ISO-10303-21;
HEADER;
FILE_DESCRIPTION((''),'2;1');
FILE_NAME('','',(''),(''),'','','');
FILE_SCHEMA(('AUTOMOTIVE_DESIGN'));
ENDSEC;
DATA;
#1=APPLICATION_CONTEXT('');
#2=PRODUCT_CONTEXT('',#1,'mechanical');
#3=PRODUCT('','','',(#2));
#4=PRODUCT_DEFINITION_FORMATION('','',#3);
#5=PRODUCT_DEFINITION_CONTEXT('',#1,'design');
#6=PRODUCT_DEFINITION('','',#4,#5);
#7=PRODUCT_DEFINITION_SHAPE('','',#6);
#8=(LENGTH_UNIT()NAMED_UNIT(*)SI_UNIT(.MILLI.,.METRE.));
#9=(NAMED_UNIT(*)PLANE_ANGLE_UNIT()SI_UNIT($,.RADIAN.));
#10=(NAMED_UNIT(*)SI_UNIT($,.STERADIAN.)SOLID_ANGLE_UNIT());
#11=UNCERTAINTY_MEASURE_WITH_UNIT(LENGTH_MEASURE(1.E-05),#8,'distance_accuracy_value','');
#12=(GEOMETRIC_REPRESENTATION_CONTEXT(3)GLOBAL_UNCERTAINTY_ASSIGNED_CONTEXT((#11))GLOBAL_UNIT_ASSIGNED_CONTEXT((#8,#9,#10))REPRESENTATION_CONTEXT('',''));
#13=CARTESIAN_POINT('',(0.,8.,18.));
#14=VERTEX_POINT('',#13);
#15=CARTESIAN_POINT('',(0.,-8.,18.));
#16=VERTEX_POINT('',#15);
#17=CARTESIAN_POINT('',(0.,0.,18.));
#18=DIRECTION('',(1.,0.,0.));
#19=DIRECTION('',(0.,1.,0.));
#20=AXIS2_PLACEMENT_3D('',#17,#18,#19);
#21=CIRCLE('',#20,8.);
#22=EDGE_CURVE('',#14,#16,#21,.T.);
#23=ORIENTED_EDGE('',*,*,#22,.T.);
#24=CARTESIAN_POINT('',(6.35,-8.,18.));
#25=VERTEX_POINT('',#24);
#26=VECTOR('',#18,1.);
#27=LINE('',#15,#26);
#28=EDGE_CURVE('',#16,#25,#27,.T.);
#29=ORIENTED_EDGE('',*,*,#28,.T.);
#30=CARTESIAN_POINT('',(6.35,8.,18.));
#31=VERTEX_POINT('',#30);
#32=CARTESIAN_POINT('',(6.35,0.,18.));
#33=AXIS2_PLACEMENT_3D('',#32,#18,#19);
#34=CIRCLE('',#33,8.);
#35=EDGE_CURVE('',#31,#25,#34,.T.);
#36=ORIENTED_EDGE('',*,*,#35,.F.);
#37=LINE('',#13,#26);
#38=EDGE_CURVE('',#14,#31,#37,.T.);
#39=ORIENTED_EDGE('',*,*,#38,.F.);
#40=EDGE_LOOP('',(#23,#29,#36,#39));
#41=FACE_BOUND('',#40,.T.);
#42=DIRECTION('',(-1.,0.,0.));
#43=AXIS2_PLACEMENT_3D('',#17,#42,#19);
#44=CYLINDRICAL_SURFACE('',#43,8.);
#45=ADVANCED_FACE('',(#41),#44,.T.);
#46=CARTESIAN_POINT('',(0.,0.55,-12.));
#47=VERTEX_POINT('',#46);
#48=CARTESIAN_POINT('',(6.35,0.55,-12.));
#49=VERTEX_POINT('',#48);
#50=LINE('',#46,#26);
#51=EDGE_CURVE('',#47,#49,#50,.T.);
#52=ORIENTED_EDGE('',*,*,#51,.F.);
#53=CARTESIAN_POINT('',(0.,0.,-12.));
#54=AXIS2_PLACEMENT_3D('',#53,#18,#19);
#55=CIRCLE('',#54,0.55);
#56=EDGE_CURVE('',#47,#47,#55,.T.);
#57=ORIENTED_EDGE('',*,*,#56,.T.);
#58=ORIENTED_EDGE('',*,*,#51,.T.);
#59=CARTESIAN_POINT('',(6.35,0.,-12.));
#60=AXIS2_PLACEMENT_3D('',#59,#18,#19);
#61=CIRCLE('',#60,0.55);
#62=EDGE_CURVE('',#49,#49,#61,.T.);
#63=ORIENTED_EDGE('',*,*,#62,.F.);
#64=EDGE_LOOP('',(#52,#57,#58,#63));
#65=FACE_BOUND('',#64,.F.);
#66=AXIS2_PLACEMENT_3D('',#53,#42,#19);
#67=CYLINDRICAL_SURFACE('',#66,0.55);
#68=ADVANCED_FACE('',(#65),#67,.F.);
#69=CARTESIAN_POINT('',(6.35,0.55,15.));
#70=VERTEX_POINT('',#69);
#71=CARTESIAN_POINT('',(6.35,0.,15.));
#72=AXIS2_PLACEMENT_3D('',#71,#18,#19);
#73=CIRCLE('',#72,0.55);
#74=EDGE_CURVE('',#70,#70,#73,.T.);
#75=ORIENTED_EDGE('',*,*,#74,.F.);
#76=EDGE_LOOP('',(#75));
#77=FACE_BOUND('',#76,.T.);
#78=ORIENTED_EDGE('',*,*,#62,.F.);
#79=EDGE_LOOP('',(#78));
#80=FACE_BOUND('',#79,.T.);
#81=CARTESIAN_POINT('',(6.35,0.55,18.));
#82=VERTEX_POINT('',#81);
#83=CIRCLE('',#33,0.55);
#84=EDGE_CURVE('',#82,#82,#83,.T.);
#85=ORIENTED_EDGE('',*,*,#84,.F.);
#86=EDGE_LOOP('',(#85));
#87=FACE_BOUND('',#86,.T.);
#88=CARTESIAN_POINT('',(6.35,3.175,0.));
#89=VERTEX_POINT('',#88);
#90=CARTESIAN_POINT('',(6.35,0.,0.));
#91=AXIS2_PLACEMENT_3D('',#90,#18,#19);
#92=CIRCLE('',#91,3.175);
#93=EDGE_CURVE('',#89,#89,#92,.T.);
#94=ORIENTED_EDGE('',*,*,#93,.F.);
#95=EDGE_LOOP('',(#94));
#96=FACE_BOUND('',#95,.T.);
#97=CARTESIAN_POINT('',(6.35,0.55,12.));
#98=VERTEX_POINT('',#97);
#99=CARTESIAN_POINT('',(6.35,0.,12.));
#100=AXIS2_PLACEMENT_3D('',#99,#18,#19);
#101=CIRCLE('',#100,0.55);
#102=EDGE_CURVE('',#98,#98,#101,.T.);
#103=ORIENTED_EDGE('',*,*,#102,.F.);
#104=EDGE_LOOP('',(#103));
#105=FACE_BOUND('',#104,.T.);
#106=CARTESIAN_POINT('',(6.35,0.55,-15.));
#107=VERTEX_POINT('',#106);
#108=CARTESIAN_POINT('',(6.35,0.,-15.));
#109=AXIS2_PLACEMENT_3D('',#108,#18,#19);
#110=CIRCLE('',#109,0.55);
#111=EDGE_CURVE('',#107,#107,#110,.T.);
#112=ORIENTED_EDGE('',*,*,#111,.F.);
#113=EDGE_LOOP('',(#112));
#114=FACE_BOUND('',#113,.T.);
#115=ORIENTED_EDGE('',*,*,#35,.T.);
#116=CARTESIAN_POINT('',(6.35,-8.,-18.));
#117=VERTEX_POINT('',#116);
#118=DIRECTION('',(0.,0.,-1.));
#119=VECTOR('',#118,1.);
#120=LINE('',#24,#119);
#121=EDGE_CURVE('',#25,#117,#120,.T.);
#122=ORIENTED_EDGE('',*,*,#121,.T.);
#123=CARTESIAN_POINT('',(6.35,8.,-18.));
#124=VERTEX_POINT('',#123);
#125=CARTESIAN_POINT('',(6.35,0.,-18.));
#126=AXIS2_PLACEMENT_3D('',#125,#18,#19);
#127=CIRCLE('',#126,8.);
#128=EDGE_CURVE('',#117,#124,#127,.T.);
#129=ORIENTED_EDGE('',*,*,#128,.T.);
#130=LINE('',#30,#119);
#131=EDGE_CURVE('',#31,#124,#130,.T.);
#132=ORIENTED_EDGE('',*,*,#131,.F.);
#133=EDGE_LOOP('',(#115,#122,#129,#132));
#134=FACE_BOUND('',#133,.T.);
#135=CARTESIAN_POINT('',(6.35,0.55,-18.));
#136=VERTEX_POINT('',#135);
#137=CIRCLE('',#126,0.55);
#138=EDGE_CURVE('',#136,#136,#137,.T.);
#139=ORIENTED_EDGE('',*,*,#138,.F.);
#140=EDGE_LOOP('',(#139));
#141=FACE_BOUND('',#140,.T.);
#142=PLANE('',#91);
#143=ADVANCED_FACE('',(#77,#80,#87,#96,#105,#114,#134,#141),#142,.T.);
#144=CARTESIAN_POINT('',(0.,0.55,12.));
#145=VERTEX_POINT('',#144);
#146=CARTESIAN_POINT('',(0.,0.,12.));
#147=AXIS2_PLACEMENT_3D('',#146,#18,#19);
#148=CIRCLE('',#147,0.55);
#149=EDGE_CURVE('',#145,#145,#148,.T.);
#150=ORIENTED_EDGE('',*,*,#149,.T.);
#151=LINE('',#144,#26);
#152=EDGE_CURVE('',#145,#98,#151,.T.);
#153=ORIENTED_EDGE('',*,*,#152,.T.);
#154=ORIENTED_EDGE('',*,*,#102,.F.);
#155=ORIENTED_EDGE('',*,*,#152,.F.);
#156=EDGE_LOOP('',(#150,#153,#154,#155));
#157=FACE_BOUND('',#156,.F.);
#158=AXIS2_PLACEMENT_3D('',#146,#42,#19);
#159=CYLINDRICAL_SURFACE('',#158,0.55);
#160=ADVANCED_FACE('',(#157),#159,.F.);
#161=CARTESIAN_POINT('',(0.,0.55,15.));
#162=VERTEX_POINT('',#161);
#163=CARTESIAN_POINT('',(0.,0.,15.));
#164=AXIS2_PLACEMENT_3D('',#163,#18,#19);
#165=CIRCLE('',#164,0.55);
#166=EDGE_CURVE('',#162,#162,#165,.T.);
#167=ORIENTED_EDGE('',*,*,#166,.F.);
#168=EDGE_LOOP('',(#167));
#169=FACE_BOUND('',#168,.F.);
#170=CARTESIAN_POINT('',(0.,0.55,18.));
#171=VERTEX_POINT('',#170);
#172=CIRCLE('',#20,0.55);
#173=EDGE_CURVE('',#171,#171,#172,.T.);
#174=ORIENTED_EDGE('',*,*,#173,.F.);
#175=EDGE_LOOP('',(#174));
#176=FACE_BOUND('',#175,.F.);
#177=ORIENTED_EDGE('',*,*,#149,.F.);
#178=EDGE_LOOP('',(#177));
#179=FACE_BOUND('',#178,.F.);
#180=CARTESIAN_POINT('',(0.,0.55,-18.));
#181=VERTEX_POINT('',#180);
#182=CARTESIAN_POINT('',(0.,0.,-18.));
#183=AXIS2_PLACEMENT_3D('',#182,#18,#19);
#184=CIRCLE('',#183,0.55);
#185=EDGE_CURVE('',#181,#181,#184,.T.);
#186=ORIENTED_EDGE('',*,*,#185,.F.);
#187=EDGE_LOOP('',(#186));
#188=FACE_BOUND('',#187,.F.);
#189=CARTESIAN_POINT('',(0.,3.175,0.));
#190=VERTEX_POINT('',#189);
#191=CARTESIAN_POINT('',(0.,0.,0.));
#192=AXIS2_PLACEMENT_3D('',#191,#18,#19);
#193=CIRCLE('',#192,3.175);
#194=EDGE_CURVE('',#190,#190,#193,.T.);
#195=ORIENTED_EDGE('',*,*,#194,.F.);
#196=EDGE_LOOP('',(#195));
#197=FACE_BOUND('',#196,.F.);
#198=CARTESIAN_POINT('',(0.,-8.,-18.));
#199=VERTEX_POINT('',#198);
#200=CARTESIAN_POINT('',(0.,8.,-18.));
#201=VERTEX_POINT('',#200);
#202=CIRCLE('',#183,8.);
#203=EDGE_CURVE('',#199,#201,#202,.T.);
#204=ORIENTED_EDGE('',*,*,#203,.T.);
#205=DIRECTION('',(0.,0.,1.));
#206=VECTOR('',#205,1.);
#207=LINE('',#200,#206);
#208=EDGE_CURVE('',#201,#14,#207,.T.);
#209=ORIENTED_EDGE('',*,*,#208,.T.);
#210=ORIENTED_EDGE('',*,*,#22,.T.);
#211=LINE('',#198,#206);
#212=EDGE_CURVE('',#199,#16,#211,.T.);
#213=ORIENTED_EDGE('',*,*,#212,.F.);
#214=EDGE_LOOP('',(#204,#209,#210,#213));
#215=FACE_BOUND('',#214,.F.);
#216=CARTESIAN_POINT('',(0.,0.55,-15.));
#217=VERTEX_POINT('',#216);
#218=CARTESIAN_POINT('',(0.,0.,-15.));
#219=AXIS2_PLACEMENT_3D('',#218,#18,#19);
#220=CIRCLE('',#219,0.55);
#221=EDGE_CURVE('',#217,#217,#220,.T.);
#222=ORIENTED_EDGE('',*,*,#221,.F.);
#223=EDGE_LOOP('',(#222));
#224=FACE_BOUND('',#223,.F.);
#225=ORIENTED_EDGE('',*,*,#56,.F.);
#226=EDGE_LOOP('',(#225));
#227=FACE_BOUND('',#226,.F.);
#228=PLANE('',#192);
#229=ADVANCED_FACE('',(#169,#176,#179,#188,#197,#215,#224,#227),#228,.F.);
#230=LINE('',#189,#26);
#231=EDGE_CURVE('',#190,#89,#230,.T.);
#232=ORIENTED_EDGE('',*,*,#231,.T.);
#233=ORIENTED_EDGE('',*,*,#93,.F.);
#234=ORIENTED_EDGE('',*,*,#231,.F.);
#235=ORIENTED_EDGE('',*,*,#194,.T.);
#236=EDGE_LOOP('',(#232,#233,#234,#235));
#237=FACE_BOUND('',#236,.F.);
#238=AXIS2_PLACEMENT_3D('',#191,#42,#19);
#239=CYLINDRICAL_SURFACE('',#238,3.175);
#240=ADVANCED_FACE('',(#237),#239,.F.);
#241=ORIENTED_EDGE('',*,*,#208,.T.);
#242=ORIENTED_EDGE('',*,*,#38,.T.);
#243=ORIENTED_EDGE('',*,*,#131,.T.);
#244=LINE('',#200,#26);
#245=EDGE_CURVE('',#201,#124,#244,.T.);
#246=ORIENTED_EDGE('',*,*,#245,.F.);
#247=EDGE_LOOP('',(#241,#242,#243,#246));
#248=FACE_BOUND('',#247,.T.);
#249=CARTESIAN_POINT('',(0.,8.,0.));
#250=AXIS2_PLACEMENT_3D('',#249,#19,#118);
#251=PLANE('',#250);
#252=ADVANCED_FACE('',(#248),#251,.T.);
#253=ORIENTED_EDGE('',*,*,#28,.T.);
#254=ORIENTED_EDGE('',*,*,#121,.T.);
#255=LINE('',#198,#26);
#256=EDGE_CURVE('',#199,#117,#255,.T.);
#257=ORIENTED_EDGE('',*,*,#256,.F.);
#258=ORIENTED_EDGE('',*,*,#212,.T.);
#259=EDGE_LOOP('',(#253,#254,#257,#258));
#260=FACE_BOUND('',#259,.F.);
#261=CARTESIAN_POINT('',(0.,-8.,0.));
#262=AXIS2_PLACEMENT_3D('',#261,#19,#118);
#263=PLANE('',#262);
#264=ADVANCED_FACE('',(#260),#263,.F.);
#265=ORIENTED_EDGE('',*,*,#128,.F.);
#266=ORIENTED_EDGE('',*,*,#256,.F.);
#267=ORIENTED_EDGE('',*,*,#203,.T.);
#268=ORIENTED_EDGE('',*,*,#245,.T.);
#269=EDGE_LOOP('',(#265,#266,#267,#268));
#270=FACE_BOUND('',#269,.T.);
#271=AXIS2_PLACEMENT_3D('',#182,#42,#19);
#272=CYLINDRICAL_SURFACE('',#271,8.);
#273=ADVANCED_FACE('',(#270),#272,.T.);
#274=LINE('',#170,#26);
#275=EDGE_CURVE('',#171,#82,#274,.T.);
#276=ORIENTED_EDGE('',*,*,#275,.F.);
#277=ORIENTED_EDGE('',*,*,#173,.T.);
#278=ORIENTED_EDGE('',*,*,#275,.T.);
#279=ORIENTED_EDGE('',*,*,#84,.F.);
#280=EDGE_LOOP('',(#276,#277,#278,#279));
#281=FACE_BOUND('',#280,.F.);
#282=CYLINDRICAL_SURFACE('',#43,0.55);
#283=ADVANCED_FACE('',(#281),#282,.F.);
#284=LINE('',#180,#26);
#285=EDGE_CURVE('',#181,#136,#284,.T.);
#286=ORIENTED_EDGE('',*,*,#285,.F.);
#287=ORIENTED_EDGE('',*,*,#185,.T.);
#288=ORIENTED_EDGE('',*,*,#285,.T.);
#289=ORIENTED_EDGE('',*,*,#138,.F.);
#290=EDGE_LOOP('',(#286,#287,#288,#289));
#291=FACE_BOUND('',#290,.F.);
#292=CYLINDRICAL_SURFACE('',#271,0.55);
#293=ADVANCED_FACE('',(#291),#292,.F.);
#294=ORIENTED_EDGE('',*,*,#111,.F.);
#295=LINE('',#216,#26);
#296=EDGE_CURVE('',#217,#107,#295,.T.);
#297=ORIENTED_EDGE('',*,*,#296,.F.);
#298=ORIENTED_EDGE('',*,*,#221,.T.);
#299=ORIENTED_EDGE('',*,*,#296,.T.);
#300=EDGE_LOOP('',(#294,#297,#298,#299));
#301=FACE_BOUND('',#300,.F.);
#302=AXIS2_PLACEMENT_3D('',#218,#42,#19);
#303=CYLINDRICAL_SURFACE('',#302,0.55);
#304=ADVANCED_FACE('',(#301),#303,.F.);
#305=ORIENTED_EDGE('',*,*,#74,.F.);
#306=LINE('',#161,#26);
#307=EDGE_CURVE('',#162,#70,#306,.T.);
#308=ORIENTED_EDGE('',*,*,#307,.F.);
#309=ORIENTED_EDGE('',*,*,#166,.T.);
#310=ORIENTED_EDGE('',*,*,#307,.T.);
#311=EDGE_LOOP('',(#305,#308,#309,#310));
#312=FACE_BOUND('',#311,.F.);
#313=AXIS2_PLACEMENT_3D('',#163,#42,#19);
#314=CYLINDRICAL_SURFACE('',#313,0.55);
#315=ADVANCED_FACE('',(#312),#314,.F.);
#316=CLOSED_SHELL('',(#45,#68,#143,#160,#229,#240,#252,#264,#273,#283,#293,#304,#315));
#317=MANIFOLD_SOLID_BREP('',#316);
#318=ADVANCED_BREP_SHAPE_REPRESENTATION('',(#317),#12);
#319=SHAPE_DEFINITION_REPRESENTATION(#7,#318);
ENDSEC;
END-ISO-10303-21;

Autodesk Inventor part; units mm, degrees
ref_plane "YZ Plane" through (0, 0, 0) normal (1, 0, 0) x (0, 1, 0)
ref_plane "XZ Plane" through (0, 0, 0) normal (0, 1, 0) x (-1, 0, 0)
ref_plane "XY Plane" through (0, 0, 0) normal (0, 0, 1) x (1, 0, 0)
sketch "Block1" plane through (0, 0, 0) normal (0, 0, 1) x (1, 0, 0)
  circle A0 centre (-34.5082, -40.3774) radius 0.55
  circle A1 centre (-31.5082, -40.3774) radius 0.55
  circle A2 centre (-28.5082, -40.3774) radius 0.55
  point P0 (-31.5082, -40.3774)
  dimension "d7" = 1.1
  dimension "d8" = 1.1
  dimension "d9" = 1.1
sketch "Sketch1" plane through (0, 0, 0) normal (1, 0, 0) x (0, 1, 0)
  circle A0 centre (0, 0) radius 3.175
  line L0 (8, 0) -> (8, -60)
  line L1 (-8, 0) -> (-8, -60)
  arc A1 (-8, -60) -> (8, -60) centre (0, -60) ccw
  circle A2 centre (0, -60) radius 3.175
  line L2 (0, -105.9654) -> (0, 47.9942) construction
  line L3 (8, 0) -> (-8, 0) construction
  line L4 (8, 0) -> (8, 18)
  line L5 (-8, 0) -> (-8, 18)
  arc A3 (8, 18) -> (-8, 18) centre (0, 18) ccw
  line L6 (-36, 0) -> (58.5, 0) construction
  line L7 (0, -45) -> (-22.5, -83.9711)
  line L8 (0, -45) -> (45, -45) construction
  line L9 (-22.5, -83.9711) -> (-22.5, -45)
  line L10 (-22.5, -45) -> (0, -45)
  line L11 (-22.5, -45) -> (-8, -30)
  circle A4 centre (0, -18) radius 8
  circle A5 centre (0, -12) radius 0.55
  circle A6 centre (0, -15) radius 0.55
  circle A7 centre (0, -18) radius 0.55
  circle A8 centre (0, 12) radius 0.55
  circle A9 centre (0, 15) radius 0.55
  circle A10 centre (0, 18) radius 0.55
  point P0 (0, 0)
  point P1 (-8, -58.8564)
  point P2 (-8, -18)
  point P3 (8, -18)
  dimension "d0" = 6.35
  dimension "d2" = 16
  dimension "d4" = 6.35
  dimension "d11" = 12
  dimension "d12" = 60
  dimension "d13" = 45
  dimension "d14" = 120
  dimension "d15" = 45
extrude "Extrusion2" add sketch "Sketch1" along normal blind 6.35 contours L0 A4 L1 L5 A3 L4 | A4
equation "\"d7\" = d9"
equation "\"d8\" = d9"
properties part number "Spacer Skiba"
